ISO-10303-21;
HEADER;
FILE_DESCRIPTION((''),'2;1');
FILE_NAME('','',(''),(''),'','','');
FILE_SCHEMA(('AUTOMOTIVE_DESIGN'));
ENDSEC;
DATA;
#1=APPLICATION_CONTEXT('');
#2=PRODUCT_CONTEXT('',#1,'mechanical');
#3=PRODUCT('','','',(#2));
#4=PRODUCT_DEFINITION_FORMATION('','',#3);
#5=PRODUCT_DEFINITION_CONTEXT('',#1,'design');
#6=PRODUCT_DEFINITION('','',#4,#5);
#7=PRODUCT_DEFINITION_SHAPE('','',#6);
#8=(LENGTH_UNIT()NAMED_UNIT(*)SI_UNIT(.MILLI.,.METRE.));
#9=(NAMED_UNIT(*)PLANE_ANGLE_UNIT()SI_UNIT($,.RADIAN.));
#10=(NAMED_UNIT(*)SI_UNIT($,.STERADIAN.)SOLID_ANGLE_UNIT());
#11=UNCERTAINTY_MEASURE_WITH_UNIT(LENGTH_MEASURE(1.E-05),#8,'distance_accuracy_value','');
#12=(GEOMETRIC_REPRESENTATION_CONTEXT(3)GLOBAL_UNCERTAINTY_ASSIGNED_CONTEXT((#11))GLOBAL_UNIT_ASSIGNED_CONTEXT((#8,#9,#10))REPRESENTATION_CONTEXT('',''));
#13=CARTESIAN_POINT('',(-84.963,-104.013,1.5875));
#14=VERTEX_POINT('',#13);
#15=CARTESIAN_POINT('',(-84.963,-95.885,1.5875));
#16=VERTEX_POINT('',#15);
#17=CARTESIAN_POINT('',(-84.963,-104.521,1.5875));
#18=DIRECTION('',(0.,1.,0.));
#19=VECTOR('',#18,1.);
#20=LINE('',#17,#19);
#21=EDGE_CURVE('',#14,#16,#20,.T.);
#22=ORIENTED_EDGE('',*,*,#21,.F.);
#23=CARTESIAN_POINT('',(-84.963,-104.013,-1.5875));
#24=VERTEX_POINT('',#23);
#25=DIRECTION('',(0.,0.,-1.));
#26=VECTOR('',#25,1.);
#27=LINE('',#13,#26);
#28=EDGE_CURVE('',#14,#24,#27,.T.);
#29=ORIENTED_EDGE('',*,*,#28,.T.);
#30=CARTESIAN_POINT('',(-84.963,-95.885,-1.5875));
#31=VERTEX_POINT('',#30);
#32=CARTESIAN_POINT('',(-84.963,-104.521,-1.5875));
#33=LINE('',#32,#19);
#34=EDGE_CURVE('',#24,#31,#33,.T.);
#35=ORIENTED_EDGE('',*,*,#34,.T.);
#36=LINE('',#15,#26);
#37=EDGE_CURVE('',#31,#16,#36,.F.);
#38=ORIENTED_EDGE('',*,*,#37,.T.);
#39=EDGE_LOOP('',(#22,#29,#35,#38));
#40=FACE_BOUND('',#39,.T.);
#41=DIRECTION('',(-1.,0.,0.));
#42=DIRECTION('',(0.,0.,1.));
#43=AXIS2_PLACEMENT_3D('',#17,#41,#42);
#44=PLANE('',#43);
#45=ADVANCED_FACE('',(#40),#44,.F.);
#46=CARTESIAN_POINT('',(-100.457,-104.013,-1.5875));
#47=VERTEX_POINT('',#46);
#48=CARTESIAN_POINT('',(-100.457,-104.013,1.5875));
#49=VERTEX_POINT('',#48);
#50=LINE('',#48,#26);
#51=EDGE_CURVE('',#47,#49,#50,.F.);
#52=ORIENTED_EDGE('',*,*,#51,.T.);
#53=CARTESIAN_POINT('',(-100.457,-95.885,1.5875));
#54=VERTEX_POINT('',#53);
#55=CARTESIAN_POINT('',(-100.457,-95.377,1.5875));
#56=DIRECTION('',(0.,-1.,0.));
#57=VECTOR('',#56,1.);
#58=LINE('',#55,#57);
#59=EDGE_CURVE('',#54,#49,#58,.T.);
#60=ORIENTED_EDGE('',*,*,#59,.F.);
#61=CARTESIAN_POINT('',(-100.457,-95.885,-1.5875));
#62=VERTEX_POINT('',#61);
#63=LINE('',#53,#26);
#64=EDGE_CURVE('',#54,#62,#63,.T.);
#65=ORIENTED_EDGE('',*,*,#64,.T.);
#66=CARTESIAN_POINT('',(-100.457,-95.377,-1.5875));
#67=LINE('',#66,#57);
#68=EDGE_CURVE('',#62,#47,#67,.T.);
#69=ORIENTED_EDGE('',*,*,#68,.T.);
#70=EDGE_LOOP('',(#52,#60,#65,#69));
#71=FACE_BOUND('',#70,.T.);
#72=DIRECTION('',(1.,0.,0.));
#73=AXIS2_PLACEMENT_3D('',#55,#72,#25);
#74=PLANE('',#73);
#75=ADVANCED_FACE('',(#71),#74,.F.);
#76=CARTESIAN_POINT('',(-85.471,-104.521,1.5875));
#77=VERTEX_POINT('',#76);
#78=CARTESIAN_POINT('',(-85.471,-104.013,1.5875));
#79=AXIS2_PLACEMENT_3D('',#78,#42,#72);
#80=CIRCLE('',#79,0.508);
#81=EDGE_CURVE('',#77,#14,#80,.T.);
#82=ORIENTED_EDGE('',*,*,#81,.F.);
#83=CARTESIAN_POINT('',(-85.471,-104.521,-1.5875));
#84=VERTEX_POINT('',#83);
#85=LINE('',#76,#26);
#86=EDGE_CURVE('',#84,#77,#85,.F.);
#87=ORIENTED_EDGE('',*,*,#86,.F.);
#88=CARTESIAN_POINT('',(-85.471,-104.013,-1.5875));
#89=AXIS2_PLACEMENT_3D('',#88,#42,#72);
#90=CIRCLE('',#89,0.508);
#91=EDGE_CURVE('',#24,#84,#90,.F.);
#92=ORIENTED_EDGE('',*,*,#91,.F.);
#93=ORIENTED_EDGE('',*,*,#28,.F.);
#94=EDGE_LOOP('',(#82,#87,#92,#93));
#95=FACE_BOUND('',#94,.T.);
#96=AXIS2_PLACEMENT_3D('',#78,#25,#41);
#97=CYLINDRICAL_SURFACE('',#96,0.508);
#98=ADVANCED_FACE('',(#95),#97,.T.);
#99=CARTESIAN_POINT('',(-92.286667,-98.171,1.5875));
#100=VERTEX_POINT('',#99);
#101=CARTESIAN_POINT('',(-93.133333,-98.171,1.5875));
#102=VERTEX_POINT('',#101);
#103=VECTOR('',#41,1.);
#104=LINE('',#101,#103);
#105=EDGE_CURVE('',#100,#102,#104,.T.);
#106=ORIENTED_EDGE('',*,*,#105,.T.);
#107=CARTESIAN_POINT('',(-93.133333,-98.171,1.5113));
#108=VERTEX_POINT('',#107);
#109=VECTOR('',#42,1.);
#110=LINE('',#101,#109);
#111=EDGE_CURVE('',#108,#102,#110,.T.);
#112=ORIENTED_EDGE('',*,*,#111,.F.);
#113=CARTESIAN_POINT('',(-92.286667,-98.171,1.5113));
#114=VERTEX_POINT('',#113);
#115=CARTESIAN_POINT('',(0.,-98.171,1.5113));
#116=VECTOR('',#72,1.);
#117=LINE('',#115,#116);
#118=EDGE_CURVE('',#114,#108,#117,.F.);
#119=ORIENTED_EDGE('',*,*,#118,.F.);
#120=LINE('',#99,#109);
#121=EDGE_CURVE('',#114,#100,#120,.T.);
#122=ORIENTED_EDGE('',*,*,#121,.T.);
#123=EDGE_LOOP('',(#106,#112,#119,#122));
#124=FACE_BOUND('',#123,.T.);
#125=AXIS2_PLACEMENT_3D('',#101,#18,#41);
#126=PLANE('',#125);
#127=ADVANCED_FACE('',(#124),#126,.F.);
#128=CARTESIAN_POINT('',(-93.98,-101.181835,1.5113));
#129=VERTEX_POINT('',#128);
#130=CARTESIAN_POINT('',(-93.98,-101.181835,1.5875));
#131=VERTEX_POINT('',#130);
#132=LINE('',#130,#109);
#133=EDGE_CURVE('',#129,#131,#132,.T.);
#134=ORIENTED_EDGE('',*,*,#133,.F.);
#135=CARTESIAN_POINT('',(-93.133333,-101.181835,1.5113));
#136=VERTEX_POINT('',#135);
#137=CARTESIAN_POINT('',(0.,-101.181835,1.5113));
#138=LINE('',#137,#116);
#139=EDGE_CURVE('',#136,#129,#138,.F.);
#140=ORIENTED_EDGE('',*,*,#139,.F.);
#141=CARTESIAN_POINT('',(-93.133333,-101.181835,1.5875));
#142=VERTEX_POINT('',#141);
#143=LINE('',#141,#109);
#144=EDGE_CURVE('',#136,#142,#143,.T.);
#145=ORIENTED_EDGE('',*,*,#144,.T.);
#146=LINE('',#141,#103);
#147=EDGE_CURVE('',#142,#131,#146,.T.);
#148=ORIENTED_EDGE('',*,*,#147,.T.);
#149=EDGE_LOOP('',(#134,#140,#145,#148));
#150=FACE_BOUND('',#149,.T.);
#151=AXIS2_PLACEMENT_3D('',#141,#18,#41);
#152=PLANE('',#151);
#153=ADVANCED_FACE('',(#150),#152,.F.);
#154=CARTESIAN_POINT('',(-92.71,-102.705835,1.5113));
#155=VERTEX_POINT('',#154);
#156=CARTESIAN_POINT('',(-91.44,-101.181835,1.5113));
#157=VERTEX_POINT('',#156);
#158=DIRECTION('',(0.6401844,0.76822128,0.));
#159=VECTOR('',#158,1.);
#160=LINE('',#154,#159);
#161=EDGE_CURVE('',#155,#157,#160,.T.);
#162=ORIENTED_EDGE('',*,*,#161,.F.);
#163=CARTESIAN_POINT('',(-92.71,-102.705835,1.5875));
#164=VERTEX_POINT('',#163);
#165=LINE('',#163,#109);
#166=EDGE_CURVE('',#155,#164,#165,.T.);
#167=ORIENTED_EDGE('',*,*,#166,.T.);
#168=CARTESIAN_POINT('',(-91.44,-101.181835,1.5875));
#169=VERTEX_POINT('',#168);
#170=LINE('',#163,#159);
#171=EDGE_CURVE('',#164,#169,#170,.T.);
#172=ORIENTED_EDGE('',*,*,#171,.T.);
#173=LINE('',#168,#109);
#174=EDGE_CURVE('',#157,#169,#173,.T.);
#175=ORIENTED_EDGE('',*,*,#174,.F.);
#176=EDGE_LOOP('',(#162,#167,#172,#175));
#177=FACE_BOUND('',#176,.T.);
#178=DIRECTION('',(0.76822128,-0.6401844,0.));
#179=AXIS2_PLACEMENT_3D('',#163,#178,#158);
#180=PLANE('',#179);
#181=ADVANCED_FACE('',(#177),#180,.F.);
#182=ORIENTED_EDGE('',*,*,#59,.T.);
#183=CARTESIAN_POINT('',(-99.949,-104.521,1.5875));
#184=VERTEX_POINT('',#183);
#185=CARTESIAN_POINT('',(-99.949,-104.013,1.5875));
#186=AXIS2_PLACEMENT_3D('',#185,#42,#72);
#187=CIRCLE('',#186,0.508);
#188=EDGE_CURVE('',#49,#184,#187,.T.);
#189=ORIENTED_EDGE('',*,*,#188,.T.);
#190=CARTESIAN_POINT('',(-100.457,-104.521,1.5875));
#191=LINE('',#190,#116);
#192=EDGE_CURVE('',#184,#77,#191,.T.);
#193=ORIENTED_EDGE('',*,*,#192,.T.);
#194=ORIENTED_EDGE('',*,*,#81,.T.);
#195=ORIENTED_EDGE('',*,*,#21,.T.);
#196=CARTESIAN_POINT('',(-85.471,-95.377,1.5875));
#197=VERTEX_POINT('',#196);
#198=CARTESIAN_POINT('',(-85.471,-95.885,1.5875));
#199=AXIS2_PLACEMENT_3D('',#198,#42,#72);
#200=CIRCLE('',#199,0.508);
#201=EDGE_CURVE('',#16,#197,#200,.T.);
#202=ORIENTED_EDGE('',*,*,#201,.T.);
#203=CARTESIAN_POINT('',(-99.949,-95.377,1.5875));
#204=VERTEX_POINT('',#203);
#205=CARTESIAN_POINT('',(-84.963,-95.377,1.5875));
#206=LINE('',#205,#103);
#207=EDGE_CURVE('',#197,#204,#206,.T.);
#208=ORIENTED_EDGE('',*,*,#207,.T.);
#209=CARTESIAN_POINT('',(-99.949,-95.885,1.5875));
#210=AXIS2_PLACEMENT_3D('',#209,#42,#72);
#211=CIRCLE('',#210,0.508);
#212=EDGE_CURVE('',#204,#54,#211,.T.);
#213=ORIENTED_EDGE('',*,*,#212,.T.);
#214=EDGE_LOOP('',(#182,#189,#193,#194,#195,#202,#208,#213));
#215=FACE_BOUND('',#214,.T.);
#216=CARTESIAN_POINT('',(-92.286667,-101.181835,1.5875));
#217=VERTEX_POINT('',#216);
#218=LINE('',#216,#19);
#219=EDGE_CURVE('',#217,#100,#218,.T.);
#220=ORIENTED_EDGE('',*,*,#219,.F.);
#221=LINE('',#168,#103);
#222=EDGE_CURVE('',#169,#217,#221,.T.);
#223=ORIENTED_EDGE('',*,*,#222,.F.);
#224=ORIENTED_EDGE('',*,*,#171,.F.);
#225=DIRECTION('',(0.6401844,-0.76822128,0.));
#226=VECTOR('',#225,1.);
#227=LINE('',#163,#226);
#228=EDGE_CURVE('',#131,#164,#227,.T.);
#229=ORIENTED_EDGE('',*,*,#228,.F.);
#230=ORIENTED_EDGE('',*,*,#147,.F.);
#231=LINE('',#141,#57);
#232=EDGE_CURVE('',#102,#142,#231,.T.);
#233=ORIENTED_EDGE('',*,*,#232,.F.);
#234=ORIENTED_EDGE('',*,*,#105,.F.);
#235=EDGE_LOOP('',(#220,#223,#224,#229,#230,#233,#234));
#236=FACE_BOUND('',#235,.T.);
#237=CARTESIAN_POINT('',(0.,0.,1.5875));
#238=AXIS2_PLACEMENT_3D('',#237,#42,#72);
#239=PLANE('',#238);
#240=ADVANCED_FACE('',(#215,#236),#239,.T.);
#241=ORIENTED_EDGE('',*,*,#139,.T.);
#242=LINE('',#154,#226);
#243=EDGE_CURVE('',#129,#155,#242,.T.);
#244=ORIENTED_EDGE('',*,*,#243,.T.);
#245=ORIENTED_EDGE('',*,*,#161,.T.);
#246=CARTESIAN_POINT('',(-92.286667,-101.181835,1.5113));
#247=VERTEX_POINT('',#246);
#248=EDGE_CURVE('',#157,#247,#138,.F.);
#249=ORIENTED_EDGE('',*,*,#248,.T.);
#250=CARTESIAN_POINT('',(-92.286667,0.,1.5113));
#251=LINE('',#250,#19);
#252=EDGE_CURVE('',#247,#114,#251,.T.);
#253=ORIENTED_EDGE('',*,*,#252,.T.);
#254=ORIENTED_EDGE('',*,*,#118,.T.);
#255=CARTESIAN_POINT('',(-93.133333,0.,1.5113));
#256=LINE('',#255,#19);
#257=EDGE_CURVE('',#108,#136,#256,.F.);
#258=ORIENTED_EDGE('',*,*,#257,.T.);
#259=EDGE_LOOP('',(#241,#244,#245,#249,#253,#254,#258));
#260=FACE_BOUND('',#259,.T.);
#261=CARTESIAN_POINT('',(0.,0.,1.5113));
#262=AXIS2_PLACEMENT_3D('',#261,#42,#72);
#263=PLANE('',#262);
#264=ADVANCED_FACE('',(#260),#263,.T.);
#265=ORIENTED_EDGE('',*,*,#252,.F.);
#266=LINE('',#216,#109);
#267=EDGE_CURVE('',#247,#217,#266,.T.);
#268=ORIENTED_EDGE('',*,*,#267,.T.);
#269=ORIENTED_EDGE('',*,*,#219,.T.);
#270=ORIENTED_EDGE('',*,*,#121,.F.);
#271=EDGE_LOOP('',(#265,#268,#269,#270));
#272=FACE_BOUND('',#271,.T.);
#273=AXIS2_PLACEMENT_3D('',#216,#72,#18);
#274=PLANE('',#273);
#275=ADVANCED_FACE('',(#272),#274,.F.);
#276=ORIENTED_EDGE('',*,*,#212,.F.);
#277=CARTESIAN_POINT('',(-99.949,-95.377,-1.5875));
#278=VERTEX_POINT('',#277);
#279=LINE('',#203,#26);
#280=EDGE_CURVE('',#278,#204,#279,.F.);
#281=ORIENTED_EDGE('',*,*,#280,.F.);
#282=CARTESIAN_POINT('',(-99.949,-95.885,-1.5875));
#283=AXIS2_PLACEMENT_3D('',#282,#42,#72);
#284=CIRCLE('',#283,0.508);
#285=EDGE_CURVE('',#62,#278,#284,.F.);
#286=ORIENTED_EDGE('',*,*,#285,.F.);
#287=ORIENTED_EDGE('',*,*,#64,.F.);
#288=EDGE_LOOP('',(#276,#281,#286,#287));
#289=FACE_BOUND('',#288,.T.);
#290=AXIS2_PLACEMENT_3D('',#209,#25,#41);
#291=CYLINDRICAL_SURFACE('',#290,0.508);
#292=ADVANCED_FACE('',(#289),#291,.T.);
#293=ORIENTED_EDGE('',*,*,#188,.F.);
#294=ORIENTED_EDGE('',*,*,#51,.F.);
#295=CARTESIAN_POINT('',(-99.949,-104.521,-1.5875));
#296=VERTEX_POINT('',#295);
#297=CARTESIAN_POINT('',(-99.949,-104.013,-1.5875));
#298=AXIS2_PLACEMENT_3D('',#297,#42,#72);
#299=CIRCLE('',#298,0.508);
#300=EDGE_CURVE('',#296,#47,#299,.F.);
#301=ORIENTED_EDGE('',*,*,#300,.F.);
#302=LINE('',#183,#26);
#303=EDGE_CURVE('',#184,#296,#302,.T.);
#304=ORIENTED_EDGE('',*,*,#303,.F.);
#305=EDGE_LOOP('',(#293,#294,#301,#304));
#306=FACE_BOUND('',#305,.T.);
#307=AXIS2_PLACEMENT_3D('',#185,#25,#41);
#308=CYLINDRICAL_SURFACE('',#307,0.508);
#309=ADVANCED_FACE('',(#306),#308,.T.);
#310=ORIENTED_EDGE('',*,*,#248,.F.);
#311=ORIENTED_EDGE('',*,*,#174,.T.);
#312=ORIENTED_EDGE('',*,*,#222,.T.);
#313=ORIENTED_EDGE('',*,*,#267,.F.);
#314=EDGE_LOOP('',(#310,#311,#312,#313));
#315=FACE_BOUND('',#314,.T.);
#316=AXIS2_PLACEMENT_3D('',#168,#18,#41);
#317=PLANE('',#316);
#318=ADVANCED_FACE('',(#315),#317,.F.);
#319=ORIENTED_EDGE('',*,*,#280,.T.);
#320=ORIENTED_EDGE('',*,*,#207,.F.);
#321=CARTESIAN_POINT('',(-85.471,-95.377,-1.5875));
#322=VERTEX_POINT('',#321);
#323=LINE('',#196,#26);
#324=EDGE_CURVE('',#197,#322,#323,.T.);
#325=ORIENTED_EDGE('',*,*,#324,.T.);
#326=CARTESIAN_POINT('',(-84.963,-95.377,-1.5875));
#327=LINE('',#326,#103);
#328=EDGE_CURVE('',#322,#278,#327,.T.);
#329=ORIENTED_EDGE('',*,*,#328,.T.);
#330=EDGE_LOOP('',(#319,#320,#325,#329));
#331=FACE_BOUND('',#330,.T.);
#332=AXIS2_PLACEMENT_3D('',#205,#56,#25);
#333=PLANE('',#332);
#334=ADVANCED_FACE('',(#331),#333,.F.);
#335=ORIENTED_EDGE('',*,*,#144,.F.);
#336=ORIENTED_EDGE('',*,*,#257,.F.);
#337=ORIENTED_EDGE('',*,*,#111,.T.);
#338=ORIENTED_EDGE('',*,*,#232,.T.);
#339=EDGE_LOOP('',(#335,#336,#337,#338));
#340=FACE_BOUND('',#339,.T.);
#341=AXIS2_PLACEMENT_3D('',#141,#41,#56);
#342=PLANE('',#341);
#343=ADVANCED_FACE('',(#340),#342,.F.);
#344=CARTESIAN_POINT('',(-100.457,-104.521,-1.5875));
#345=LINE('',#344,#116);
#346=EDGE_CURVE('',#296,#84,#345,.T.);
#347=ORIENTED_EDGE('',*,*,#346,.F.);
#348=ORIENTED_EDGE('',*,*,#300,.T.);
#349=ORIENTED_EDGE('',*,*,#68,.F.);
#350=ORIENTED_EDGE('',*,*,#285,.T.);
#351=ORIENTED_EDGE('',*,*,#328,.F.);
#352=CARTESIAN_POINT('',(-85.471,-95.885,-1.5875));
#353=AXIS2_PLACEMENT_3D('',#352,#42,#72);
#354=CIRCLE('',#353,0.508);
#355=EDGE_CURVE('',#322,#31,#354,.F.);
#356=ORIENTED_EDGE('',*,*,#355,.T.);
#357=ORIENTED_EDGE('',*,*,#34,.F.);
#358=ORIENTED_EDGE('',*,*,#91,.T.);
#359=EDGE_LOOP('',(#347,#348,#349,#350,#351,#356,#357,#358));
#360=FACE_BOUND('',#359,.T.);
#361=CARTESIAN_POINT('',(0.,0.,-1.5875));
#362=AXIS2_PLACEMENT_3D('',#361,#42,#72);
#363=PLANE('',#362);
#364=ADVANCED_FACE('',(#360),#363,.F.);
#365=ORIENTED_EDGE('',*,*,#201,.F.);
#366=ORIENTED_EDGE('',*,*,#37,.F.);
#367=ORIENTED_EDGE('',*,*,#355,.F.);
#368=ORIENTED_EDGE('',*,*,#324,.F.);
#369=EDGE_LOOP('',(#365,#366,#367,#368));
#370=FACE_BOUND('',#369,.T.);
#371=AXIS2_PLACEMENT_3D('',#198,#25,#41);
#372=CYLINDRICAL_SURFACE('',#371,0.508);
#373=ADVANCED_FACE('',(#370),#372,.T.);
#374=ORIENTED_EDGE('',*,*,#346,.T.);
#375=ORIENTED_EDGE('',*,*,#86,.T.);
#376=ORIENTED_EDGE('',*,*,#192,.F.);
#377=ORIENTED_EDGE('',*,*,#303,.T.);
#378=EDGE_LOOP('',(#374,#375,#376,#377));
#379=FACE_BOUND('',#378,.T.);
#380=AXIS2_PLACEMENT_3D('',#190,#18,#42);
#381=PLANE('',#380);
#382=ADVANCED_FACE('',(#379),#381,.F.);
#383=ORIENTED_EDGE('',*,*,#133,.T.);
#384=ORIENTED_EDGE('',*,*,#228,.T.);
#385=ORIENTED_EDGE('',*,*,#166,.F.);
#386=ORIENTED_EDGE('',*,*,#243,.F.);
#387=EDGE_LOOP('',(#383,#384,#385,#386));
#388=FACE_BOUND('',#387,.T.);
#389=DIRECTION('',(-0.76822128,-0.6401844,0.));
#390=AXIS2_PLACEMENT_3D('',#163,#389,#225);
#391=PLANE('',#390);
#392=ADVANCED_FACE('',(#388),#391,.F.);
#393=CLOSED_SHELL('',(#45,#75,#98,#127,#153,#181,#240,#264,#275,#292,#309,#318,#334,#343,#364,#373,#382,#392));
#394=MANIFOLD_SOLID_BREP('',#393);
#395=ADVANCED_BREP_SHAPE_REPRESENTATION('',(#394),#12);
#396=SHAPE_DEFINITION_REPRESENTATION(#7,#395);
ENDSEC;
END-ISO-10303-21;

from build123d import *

# Parameters (mm, degrees)
SKETCH1_W           = 15.494
SKETCH1_H           = 9.144
BOSS_EXTRUDE1_DEPTH = 1.5875
FILLET1_R           = 0.508
WRAP2_START         = -0.0762
WRAP2_DEPTH         = 0.0762


# Read off the part's stored shape, not the designer's step: Wrap2
with BuildPart() as part:
    # Sketch1 → Boss-Extrude1 (new, symmetric)
    with BuildSketch(Plane.XY):
        with Locations((-92.71, -99.949)):
            Rectangle(SKETCH1_W, SKETCH1_H)
    extrude(amount=BOSS_EXTRUDE1_DEPTH, both=True)

    # Fillet1
    fillet1_edges = [part.edges().sort_by_distance(p)[0] for p in [
        (-84.963, -104.521, 0),
        (-100.457, -104.521, 0),
        (-100.457, -95.377, 0),
        (-84.963, -95.377, 0),
    ]]
    fillet(fillet1_edges, radius=FILLET1_R)

    # Wrap2 outline → Wrap2 (cut)
    with BuildSketch(Plane.XY.offset(1.5875).offset(WRAP2_START)):
        Polygon((-92.286666667, -98.171), (-93.133333333, -98.171), (-93.133333333, -101.181834934), (-93.98, -101.181834934), (-92.71, -102.705834934), (-91.44, -101.181834934), (-92.286666667, -101.181834934), align=None)
    extrude(amount=WRAP2_DEPTH, mode=Mode.SUBTRACT)


solid = part.part
